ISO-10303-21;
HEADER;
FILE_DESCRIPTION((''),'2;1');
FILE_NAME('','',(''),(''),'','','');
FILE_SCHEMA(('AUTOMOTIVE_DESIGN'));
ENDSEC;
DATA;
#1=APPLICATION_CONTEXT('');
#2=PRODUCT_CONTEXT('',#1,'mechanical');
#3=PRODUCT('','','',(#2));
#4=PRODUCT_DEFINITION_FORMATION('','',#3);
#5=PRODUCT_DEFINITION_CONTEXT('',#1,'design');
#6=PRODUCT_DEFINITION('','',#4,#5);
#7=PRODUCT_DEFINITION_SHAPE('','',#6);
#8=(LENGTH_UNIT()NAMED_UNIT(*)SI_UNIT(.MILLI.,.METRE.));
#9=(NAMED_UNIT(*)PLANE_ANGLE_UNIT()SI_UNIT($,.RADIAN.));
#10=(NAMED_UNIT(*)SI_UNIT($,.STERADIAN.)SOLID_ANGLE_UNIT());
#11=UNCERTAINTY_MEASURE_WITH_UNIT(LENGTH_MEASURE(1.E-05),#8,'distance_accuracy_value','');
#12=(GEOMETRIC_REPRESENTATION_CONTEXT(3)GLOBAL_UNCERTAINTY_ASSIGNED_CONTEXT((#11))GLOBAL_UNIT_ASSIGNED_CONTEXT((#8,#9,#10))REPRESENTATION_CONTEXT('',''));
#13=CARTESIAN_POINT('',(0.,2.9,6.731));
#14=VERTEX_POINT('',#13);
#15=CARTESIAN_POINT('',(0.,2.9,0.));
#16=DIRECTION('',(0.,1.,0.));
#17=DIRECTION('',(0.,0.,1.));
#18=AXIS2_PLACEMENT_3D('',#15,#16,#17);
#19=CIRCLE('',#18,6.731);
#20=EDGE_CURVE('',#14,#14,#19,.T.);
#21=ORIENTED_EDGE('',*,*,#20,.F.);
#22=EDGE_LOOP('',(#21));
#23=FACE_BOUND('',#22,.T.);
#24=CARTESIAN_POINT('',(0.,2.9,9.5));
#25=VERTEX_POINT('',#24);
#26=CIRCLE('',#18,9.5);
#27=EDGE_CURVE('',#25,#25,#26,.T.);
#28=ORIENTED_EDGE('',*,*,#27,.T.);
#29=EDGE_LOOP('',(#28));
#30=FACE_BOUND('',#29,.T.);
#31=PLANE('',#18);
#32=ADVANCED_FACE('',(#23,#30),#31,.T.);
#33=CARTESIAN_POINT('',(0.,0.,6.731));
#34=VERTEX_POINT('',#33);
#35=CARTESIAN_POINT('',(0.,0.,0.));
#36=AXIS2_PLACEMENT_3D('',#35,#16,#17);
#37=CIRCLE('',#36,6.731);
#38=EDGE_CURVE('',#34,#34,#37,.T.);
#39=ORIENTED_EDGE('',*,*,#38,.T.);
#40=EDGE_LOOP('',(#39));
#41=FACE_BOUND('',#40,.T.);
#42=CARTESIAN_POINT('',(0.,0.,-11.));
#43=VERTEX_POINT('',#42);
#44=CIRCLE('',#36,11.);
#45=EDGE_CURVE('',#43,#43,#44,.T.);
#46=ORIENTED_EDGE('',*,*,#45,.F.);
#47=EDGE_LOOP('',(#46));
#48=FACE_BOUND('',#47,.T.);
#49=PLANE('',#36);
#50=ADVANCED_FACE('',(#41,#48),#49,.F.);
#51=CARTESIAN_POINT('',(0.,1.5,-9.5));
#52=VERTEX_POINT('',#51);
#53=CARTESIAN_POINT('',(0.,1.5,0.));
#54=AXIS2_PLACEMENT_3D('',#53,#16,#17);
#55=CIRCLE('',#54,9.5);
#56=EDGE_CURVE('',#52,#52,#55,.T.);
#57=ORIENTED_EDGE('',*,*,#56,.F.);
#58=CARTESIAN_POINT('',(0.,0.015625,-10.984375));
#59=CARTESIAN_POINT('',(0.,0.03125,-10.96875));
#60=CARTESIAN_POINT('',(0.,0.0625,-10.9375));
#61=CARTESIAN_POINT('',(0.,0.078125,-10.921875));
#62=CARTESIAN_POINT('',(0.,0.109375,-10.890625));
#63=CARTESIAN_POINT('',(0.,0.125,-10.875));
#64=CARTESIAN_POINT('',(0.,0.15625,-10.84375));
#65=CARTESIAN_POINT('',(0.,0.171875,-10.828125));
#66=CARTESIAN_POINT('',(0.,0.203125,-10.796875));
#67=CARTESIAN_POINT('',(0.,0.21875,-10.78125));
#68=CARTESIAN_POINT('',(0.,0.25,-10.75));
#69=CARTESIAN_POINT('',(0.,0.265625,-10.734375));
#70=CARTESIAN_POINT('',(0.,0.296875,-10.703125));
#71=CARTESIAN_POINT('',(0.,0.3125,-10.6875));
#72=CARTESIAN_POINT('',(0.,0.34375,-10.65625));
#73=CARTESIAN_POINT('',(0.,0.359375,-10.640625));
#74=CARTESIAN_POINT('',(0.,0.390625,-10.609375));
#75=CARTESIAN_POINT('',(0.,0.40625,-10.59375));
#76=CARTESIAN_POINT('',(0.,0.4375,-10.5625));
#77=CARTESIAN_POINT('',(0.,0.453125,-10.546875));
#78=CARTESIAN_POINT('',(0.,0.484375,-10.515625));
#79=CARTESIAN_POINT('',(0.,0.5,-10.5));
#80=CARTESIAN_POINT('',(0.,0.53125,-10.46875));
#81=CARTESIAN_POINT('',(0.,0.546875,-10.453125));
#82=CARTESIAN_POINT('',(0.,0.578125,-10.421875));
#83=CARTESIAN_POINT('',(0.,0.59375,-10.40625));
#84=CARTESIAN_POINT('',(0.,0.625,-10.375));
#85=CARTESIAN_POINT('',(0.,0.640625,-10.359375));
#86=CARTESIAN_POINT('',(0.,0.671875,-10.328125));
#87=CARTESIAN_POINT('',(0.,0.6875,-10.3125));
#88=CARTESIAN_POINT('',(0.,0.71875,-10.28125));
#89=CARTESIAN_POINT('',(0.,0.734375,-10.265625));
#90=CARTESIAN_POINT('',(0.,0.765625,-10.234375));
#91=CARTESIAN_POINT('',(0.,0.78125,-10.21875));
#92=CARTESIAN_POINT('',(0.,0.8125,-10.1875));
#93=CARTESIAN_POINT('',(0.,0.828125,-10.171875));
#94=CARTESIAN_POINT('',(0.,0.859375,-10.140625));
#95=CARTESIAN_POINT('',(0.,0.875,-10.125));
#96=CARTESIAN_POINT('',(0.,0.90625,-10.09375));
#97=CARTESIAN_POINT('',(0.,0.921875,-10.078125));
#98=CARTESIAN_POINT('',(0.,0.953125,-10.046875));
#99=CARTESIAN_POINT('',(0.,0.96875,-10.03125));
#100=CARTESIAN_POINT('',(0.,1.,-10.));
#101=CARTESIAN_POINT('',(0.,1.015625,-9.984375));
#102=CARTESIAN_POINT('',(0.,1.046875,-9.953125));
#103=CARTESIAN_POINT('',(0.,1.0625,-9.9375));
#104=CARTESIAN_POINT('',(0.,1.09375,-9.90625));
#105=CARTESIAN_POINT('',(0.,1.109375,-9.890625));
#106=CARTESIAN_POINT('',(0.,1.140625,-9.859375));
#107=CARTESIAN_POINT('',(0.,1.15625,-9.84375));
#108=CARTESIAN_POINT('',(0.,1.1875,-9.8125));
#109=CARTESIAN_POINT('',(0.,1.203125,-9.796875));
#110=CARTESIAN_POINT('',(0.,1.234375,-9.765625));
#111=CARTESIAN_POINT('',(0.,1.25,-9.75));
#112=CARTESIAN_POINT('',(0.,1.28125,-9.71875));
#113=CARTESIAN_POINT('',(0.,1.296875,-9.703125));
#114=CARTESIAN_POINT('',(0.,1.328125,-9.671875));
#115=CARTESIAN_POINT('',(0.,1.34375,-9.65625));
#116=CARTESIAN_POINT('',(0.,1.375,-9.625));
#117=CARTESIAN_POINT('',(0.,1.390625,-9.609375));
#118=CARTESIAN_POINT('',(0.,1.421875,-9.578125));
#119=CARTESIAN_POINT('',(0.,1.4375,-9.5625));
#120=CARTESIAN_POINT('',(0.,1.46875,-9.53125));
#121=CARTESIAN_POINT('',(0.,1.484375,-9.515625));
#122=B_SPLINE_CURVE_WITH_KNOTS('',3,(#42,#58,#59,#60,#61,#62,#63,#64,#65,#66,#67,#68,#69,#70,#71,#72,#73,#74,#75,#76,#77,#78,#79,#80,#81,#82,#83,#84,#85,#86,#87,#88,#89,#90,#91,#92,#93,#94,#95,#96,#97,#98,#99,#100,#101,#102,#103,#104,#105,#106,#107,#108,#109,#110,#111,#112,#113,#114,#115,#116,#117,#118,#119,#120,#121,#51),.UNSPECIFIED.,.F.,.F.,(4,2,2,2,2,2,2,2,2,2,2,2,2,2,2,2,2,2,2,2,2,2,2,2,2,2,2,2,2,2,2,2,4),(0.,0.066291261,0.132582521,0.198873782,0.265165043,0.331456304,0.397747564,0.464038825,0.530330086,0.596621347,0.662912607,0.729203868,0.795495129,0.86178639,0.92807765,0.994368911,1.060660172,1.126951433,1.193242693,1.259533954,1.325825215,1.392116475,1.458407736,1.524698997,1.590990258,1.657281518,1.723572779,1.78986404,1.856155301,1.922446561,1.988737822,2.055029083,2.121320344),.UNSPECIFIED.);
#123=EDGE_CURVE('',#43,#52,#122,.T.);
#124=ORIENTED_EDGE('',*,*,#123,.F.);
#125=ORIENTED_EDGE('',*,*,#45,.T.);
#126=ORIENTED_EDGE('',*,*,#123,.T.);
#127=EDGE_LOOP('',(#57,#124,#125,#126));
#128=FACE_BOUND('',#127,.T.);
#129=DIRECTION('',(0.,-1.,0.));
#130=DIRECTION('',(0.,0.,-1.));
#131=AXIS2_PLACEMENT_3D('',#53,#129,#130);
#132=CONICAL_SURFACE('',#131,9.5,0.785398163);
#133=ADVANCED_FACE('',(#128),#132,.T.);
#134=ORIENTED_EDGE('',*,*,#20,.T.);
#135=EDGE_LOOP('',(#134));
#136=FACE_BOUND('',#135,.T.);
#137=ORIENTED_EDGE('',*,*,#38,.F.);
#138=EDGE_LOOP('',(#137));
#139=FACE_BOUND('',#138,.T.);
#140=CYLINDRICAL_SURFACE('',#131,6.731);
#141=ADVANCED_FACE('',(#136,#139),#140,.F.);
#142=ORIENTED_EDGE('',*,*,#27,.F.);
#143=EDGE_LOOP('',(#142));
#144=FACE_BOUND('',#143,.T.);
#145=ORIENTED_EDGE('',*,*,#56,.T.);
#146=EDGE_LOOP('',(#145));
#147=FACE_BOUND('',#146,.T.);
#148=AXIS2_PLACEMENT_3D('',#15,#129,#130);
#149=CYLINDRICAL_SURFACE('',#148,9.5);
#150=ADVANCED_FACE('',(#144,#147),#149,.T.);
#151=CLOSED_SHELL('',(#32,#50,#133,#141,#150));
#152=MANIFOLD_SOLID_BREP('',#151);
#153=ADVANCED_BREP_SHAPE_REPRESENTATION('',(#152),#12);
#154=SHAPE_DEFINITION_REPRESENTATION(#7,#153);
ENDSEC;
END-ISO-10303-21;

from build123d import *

# Parameters (mm, degrees)
SKETCH1_R           = 11
SKETCH1_R_2         = 6.731
BOSS_EXTRUDE1_DEPTH = 1.5
CHAMFER1_SIZE       = 1.5
SKETCH2_R           = 9.5
SKETCH2_R_2         = 6.731
BOSS_EXTRUDE2_DEPTH = 1.4


with BuildPart() as part:
    # Sketch1 → Boss-Extrude1 (new body)
    with BuildSketch(Plane(origin=(0, 0, 0), x_dir=(1, 0, 0), z_dir=(0, 1, 0))):
        with Locations(Location((0, 0, 0), (0, 0, 270))):
            Circle(SKETCH1_R)
        with Locations(Location((0, 0, 0), (0, 0, 270))):
            Circle(SKETCH1_R_2, mode=Mode.SUBTRACT)
    extrude(amount=BOSS_EXTRUDE1_DEPTH)

    # Chamfer1
    chamfer1_edges = [part.edges().sort_by_distance(p)[0] for p in [
        (0, 1.5, -11),
    ]]
    chamfer(chamfer1_edges, length=CHAMFER1_SIZE - 0.0001)  # a hair under: the kernel refuses the full size

    # Sketch2 → Boss-Extrude2 (add)
    with BuildSketch(Plane(origin=(0, 1.5, 0), x_dir=(1, 0, 0), z_dir=(0, 1, 0))):
        with Locations(Location((0, 0, 0), (0, 0, 90))):
            Circle(SKETCH2_R)
        with Locations(Location((0, 0, 0), (0, 0, 270))):
            Circle(SKETCH2_R_2, mode=Mode.SUBTRACT)
    extrude(amount=BOSS_EXTRUDE2_DEPTH)


solid = part.part
